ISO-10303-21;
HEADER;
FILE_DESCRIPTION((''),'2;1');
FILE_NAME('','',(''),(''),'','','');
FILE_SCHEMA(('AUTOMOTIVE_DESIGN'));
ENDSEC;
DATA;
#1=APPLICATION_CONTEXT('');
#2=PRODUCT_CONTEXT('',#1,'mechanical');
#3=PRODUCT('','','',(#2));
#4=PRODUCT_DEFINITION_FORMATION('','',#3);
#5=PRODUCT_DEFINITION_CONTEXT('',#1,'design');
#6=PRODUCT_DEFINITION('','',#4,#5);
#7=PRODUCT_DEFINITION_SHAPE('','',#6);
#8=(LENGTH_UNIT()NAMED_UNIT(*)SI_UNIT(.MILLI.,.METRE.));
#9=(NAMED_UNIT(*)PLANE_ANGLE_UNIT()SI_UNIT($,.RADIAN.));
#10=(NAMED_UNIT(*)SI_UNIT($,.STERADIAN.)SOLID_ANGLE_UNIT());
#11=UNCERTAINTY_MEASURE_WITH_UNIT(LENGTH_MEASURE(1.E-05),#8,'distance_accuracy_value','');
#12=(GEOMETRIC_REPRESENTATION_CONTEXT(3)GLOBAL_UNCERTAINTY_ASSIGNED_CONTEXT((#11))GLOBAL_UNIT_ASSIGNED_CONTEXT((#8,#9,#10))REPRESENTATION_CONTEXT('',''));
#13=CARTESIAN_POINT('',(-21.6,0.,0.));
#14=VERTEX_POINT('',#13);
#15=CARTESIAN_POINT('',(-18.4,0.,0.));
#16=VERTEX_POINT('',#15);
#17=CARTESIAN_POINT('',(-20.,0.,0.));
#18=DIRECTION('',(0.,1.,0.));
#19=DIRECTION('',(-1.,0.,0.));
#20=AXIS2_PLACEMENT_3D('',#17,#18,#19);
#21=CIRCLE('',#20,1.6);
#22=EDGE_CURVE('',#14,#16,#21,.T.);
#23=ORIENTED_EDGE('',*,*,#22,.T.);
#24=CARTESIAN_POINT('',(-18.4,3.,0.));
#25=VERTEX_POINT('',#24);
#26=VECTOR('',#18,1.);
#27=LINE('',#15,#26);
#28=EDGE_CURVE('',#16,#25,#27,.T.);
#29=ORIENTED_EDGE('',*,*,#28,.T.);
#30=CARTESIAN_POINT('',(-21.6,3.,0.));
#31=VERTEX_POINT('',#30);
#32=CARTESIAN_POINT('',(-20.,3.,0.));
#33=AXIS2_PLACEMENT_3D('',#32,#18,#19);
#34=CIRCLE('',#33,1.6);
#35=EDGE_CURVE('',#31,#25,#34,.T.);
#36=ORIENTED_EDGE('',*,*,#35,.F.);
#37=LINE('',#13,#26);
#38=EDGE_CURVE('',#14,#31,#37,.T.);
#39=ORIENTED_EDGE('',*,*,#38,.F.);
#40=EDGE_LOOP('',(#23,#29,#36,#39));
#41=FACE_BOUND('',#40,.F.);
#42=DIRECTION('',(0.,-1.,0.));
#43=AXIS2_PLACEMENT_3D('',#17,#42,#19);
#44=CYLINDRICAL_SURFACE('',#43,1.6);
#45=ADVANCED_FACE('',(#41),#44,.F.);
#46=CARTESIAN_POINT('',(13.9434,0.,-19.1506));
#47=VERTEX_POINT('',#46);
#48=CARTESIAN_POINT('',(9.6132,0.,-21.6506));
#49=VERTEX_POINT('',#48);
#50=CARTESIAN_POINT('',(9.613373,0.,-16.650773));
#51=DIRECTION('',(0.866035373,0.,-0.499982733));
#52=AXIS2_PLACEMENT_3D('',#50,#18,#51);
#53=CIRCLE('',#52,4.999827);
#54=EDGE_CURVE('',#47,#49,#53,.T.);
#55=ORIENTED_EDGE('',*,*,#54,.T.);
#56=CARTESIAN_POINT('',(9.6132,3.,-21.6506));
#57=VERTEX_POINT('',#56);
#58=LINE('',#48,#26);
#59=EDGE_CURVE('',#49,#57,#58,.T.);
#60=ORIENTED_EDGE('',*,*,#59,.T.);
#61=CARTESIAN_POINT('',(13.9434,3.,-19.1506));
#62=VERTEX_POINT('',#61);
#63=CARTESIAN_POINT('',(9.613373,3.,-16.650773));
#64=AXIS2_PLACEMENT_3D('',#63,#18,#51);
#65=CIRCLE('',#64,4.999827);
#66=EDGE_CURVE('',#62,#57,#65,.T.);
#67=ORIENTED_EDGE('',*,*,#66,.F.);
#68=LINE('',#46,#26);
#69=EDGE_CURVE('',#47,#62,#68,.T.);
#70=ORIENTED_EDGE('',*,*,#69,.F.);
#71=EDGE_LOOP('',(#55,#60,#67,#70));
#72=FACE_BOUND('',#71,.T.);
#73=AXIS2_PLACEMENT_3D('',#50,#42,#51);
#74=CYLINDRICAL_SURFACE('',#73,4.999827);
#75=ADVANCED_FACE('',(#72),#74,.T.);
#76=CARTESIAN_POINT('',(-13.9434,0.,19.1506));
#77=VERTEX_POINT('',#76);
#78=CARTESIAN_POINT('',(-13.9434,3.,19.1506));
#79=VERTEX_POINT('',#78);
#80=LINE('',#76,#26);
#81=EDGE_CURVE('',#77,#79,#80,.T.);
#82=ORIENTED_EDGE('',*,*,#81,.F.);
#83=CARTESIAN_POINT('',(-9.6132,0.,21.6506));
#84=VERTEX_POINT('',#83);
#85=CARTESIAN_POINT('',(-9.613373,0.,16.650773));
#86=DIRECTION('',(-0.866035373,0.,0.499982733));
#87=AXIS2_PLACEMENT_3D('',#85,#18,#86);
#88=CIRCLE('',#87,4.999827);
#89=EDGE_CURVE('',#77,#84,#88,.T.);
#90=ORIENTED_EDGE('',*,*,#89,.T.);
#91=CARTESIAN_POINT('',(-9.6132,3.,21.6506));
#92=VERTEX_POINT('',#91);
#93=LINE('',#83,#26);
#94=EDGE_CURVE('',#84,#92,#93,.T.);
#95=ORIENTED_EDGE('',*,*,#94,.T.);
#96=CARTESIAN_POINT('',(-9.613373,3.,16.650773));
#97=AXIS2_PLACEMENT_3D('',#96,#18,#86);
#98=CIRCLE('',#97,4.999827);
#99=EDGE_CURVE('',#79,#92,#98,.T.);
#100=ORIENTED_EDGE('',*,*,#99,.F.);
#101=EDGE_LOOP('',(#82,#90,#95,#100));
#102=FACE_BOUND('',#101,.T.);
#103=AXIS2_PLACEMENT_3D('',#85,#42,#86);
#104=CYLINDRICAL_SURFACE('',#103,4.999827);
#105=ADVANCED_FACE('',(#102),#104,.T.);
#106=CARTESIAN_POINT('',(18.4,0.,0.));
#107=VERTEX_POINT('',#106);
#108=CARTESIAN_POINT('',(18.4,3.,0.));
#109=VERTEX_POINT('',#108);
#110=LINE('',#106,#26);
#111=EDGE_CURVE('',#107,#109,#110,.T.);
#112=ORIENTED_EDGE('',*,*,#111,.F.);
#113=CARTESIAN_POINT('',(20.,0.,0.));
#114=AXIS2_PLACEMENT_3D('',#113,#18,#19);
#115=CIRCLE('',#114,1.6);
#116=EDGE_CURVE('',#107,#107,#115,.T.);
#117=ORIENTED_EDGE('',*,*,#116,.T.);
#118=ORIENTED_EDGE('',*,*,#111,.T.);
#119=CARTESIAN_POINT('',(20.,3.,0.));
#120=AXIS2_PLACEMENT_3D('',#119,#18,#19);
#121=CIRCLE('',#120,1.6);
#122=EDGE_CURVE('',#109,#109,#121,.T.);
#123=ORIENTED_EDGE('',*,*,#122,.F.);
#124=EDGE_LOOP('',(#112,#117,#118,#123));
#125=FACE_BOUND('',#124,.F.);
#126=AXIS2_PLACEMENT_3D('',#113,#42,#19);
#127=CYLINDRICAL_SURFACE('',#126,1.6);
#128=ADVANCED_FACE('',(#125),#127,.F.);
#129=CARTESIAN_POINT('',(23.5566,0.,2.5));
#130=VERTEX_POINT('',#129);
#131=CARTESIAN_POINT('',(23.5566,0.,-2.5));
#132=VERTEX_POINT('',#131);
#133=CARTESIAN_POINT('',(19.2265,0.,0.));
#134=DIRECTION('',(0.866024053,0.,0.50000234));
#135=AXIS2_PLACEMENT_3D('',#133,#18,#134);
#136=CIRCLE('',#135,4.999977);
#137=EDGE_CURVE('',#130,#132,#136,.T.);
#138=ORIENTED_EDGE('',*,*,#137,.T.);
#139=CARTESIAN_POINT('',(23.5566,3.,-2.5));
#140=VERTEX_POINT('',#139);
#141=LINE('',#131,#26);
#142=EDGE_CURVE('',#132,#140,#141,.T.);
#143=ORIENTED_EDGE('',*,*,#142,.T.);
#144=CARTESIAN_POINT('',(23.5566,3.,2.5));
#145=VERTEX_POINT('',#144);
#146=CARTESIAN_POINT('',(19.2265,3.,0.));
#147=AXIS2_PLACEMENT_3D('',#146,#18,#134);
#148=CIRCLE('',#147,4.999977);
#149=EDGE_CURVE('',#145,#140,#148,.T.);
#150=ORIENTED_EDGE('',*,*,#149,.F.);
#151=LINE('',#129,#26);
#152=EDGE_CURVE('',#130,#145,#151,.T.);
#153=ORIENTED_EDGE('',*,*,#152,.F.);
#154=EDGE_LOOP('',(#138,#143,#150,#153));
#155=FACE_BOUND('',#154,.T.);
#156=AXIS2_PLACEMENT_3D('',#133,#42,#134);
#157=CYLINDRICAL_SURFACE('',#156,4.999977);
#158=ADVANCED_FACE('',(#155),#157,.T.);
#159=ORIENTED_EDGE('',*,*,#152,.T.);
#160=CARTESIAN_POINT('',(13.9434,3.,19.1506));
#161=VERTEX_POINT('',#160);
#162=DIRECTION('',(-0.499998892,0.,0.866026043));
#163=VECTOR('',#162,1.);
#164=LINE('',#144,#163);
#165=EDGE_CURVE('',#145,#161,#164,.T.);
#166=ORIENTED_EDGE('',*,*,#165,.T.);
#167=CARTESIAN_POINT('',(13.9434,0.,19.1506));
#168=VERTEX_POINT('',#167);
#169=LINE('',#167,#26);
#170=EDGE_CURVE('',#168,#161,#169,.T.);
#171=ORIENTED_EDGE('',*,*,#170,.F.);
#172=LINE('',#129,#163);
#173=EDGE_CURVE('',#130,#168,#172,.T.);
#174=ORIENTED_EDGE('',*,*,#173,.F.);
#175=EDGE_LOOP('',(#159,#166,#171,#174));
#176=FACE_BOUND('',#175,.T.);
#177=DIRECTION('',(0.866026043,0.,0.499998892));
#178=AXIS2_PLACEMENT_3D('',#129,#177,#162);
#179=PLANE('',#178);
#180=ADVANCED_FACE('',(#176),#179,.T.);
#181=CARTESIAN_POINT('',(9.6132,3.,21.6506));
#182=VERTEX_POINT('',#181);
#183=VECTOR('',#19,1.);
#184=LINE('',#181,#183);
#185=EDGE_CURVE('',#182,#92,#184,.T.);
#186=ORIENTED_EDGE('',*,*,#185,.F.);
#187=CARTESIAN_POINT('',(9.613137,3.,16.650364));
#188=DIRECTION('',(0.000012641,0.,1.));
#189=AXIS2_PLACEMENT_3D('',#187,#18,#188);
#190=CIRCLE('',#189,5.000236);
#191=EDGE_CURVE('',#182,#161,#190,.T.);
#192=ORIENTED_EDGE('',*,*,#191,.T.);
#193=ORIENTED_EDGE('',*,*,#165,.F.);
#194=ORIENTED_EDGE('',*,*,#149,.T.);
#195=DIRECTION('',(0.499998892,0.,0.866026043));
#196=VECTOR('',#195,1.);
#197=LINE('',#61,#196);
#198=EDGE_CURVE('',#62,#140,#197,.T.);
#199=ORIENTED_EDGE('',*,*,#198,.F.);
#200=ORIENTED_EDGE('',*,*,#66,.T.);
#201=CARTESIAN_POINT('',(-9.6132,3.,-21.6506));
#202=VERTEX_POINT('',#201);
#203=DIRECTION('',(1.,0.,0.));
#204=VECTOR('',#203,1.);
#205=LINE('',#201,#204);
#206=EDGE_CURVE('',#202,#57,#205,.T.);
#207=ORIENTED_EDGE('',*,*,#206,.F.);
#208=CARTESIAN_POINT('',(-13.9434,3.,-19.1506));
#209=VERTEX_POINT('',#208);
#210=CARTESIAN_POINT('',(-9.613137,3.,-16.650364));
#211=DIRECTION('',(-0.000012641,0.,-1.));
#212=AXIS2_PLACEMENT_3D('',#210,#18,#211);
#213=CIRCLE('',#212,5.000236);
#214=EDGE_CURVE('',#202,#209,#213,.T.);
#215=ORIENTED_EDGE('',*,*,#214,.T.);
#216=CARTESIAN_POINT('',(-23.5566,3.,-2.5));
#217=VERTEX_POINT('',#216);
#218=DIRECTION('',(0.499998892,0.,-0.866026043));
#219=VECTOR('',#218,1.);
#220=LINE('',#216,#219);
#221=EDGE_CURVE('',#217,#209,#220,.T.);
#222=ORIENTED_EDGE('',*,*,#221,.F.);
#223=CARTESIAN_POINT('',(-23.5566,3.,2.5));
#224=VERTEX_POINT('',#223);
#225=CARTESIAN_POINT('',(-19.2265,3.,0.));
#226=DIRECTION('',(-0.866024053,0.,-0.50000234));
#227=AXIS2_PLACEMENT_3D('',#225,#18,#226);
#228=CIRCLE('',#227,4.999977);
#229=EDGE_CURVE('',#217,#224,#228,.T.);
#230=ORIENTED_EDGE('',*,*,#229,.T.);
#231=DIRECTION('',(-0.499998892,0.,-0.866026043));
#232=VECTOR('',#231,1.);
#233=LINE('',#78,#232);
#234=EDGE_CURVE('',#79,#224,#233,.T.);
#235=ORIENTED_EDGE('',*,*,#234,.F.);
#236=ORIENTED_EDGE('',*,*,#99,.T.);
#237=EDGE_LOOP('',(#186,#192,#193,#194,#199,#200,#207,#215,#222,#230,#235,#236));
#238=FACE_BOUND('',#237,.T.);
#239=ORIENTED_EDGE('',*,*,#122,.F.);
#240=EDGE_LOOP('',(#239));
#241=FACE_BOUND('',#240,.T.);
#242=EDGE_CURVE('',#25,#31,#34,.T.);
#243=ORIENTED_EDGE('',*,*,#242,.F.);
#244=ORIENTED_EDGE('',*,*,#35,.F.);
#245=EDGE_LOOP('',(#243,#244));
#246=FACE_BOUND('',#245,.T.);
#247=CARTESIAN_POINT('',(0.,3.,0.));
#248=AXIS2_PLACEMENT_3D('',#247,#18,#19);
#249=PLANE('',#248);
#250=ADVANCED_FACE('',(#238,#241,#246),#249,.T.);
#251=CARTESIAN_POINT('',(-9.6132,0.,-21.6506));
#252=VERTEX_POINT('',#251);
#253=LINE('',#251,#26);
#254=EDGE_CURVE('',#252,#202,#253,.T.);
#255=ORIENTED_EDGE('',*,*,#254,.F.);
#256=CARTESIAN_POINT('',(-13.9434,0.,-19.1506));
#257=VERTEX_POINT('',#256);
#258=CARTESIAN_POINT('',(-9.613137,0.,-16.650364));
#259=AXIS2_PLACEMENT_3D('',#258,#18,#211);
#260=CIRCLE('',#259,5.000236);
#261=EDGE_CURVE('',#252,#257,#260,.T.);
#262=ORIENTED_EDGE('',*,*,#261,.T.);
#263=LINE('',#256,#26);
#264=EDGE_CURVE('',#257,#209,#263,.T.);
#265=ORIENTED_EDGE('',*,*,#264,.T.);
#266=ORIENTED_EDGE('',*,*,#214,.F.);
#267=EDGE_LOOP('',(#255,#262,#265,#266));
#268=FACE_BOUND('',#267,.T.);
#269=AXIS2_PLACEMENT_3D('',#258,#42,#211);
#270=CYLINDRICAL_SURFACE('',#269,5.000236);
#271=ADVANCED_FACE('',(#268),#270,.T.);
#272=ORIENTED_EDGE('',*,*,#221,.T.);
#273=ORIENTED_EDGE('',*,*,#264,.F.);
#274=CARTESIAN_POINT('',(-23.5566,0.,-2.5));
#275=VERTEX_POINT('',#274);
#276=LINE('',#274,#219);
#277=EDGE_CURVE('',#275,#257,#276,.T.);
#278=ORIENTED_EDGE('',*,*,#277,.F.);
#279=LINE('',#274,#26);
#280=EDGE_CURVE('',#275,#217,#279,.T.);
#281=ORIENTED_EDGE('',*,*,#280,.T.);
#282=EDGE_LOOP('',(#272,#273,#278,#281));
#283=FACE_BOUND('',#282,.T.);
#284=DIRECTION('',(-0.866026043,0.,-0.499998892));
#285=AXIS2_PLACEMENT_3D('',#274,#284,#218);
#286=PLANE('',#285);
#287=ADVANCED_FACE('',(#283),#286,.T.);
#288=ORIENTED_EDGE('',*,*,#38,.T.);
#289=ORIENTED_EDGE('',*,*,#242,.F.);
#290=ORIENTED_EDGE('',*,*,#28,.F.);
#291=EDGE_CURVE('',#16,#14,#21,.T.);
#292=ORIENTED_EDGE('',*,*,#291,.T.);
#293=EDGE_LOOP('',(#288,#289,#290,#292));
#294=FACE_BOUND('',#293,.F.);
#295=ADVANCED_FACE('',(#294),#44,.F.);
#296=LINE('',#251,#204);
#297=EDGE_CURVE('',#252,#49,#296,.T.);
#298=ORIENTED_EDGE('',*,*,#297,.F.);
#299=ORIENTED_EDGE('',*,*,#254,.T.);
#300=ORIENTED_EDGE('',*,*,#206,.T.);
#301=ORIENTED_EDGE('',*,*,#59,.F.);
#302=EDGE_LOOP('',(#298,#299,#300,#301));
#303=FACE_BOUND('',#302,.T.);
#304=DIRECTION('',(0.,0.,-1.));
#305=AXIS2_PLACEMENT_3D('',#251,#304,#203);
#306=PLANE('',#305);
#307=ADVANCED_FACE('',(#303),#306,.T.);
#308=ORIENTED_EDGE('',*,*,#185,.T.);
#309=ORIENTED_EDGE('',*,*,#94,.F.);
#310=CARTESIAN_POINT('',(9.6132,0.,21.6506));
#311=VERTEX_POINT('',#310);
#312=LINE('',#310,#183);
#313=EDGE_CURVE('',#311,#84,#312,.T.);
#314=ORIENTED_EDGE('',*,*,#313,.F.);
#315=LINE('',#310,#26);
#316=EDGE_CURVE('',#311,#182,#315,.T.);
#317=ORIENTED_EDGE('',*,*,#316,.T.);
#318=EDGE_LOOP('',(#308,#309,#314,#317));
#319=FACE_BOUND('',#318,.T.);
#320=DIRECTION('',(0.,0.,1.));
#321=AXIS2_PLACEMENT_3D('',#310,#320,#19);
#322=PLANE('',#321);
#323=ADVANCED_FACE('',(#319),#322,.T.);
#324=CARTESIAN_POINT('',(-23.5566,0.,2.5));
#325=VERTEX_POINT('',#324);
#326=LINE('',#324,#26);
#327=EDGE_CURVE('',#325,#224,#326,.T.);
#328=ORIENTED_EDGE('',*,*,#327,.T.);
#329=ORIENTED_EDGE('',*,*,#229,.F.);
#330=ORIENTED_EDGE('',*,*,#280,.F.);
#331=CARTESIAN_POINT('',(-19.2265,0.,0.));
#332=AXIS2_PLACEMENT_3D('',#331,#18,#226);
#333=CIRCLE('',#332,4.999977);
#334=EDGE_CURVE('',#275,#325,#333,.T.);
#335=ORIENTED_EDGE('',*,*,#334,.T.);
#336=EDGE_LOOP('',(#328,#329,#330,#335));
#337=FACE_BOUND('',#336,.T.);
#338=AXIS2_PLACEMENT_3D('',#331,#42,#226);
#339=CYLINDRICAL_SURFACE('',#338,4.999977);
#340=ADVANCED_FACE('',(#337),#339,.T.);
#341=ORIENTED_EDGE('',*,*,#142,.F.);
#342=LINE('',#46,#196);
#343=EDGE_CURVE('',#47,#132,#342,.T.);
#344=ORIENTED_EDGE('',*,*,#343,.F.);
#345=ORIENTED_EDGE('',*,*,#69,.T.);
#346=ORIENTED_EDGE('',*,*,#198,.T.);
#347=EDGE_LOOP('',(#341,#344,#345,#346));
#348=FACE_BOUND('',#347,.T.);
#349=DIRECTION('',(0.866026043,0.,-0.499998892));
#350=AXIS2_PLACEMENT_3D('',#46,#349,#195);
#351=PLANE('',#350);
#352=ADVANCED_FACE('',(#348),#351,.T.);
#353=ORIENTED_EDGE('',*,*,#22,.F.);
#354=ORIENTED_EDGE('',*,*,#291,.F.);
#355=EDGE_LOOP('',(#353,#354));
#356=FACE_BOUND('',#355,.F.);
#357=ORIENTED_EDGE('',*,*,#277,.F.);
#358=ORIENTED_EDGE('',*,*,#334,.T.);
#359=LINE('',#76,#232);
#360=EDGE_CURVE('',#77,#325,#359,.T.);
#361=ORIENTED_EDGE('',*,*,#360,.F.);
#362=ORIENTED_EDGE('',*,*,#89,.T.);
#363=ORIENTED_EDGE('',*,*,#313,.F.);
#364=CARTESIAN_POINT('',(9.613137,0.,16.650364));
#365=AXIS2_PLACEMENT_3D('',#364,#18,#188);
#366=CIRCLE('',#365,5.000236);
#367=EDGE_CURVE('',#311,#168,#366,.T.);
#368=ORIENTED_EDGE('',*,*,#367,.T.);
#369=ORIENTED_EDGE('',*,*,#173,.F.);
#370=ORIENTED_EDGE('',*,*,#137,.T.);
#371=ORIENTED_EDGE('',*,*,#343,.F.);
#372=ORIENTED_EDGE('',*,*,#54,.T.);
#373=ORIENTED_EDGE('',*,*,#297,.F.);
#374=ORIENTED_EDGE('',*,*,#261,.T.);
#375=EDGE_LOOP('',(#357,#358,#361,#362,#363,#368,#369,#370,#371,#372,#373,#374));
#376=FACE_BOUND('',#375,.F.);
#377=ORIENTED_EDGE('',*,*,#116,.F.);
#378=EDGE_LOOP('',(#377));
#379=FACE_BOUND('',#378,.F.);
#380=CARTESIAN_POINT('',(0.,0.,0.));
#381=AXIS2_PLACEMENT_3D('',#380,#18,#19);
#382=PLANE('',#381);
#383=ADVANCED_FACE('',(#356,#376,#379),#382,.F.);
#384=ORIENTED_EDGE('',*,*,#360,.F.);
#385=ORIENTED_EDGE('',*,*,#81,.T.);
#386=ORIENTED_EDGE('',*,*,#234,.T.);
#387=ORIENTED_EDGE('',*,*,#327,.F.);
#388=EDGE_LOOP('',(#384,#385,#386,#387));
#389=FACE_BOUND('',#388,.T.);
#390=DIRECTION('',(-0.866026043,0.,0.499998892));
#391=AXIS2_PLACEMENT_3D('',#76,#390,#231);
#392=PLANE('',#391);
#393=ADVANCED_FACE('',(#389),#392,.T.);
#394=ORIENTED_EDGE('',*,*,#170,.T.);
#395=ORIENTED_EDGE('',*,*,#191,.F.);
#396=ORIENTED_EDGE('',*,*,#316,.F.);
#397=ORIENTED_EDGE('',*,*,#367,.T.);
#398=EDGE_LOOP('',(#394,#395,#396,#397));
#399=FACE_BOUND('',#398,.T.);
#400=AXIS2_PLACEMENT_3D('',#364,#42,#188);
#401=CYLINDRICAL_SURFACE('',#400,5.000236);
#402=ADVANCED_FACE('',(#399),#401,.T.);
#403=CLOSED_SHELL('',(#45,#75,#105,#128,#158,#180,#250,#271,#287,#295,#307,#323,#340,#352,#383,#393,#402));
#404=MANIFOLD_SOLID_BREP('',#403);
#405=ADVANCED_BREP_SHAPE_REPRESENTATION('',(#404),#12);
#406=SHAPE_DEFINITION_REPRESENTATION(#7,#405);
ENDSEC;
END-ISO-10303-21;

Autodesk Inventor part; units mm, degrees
ref_plane "YZ Plane" through (0, 0, 0) normal (1, 0, 0) x (0, 1, 0)
ref_plane "XZ Plane" through (0, 0, 0) normal (0, 1, 0) x (-1, 0, 0)
ref_plane "XY Plane" through (0, 0, 0) normal (0, 0, 1) x (1, 0, 0)
sketch "Sketch1" plane through (0, 0, 0) normal (0, 1, 0) x (-1, 0, 0)
  line L0 (23.5566, -2.5) -> (13.9434, -19.1506)
  line L1 (9.6132, -21.6506) -> (-9.6132, -21.6506)
  line L2 (-13.9434, -19.1506) -> (-23.5566, -2.5)
  line L3 (-23.5566, 2.5) -> (-13.9434, 19.1506)
  line L4 (-9.6132, 21.6506) -> (9.6132, 21.6506)
  line L5 (13.9434, 19.1506) -> (23.5566, 2.5)
  line L6 (0, 0) -> (20, 0)
  line L7 (0, 0) -> (-20, 0)
  circle A0 centre (20, 0) radius 1.6
  circle A1 centre (-20, 0) radius 1.6
  arc A2 (13.9434, 19.1506) -> (9.6132, 21.6506) centre (9.6132, 16.6506) ccw
  arc A3 (23.5566, -2.5) -> (23.5566, 2.5) centre (19.2265, 0) ccw
  arc A4 (9.6132, -21.6506) -> (13.9434, -19.1506) centre (9.6132, -16.6506) ccw
  arc A5 (-13.9434, -19.1506) -> (-9.6132, -21.6506) centre (-9.6132, -16.6506) ccw
  arc A6 (-23.5566, 2.5) -> (-23.5566, -2.5) centre (-19.2265, 0) ccw
  arc A7 (-9.6132, 21.6506) -> (-13.9434, 19.1506) centre (-9.6132, 16.6506) ccw
  point P0 (25, 0)
  point P1 (12.5, -21.6506)
  point P2 (-12.5, -21.6506)
  point P3 (-25, 0)
  point P4 (-12.5, 21.6506)
  point P5 (12.5, 21.6506)
  dimension "d0" = 50
  dimension "d1" = 20
  dimension "d2" = 20
  dimension "d3" = 3.2
  dimension "d4" = 3.2
  dimension "d5" = 5
extrude "Extrusion1" add sketch "Sketch1" along normal blind 3
properties part number "Battery cover hex"
